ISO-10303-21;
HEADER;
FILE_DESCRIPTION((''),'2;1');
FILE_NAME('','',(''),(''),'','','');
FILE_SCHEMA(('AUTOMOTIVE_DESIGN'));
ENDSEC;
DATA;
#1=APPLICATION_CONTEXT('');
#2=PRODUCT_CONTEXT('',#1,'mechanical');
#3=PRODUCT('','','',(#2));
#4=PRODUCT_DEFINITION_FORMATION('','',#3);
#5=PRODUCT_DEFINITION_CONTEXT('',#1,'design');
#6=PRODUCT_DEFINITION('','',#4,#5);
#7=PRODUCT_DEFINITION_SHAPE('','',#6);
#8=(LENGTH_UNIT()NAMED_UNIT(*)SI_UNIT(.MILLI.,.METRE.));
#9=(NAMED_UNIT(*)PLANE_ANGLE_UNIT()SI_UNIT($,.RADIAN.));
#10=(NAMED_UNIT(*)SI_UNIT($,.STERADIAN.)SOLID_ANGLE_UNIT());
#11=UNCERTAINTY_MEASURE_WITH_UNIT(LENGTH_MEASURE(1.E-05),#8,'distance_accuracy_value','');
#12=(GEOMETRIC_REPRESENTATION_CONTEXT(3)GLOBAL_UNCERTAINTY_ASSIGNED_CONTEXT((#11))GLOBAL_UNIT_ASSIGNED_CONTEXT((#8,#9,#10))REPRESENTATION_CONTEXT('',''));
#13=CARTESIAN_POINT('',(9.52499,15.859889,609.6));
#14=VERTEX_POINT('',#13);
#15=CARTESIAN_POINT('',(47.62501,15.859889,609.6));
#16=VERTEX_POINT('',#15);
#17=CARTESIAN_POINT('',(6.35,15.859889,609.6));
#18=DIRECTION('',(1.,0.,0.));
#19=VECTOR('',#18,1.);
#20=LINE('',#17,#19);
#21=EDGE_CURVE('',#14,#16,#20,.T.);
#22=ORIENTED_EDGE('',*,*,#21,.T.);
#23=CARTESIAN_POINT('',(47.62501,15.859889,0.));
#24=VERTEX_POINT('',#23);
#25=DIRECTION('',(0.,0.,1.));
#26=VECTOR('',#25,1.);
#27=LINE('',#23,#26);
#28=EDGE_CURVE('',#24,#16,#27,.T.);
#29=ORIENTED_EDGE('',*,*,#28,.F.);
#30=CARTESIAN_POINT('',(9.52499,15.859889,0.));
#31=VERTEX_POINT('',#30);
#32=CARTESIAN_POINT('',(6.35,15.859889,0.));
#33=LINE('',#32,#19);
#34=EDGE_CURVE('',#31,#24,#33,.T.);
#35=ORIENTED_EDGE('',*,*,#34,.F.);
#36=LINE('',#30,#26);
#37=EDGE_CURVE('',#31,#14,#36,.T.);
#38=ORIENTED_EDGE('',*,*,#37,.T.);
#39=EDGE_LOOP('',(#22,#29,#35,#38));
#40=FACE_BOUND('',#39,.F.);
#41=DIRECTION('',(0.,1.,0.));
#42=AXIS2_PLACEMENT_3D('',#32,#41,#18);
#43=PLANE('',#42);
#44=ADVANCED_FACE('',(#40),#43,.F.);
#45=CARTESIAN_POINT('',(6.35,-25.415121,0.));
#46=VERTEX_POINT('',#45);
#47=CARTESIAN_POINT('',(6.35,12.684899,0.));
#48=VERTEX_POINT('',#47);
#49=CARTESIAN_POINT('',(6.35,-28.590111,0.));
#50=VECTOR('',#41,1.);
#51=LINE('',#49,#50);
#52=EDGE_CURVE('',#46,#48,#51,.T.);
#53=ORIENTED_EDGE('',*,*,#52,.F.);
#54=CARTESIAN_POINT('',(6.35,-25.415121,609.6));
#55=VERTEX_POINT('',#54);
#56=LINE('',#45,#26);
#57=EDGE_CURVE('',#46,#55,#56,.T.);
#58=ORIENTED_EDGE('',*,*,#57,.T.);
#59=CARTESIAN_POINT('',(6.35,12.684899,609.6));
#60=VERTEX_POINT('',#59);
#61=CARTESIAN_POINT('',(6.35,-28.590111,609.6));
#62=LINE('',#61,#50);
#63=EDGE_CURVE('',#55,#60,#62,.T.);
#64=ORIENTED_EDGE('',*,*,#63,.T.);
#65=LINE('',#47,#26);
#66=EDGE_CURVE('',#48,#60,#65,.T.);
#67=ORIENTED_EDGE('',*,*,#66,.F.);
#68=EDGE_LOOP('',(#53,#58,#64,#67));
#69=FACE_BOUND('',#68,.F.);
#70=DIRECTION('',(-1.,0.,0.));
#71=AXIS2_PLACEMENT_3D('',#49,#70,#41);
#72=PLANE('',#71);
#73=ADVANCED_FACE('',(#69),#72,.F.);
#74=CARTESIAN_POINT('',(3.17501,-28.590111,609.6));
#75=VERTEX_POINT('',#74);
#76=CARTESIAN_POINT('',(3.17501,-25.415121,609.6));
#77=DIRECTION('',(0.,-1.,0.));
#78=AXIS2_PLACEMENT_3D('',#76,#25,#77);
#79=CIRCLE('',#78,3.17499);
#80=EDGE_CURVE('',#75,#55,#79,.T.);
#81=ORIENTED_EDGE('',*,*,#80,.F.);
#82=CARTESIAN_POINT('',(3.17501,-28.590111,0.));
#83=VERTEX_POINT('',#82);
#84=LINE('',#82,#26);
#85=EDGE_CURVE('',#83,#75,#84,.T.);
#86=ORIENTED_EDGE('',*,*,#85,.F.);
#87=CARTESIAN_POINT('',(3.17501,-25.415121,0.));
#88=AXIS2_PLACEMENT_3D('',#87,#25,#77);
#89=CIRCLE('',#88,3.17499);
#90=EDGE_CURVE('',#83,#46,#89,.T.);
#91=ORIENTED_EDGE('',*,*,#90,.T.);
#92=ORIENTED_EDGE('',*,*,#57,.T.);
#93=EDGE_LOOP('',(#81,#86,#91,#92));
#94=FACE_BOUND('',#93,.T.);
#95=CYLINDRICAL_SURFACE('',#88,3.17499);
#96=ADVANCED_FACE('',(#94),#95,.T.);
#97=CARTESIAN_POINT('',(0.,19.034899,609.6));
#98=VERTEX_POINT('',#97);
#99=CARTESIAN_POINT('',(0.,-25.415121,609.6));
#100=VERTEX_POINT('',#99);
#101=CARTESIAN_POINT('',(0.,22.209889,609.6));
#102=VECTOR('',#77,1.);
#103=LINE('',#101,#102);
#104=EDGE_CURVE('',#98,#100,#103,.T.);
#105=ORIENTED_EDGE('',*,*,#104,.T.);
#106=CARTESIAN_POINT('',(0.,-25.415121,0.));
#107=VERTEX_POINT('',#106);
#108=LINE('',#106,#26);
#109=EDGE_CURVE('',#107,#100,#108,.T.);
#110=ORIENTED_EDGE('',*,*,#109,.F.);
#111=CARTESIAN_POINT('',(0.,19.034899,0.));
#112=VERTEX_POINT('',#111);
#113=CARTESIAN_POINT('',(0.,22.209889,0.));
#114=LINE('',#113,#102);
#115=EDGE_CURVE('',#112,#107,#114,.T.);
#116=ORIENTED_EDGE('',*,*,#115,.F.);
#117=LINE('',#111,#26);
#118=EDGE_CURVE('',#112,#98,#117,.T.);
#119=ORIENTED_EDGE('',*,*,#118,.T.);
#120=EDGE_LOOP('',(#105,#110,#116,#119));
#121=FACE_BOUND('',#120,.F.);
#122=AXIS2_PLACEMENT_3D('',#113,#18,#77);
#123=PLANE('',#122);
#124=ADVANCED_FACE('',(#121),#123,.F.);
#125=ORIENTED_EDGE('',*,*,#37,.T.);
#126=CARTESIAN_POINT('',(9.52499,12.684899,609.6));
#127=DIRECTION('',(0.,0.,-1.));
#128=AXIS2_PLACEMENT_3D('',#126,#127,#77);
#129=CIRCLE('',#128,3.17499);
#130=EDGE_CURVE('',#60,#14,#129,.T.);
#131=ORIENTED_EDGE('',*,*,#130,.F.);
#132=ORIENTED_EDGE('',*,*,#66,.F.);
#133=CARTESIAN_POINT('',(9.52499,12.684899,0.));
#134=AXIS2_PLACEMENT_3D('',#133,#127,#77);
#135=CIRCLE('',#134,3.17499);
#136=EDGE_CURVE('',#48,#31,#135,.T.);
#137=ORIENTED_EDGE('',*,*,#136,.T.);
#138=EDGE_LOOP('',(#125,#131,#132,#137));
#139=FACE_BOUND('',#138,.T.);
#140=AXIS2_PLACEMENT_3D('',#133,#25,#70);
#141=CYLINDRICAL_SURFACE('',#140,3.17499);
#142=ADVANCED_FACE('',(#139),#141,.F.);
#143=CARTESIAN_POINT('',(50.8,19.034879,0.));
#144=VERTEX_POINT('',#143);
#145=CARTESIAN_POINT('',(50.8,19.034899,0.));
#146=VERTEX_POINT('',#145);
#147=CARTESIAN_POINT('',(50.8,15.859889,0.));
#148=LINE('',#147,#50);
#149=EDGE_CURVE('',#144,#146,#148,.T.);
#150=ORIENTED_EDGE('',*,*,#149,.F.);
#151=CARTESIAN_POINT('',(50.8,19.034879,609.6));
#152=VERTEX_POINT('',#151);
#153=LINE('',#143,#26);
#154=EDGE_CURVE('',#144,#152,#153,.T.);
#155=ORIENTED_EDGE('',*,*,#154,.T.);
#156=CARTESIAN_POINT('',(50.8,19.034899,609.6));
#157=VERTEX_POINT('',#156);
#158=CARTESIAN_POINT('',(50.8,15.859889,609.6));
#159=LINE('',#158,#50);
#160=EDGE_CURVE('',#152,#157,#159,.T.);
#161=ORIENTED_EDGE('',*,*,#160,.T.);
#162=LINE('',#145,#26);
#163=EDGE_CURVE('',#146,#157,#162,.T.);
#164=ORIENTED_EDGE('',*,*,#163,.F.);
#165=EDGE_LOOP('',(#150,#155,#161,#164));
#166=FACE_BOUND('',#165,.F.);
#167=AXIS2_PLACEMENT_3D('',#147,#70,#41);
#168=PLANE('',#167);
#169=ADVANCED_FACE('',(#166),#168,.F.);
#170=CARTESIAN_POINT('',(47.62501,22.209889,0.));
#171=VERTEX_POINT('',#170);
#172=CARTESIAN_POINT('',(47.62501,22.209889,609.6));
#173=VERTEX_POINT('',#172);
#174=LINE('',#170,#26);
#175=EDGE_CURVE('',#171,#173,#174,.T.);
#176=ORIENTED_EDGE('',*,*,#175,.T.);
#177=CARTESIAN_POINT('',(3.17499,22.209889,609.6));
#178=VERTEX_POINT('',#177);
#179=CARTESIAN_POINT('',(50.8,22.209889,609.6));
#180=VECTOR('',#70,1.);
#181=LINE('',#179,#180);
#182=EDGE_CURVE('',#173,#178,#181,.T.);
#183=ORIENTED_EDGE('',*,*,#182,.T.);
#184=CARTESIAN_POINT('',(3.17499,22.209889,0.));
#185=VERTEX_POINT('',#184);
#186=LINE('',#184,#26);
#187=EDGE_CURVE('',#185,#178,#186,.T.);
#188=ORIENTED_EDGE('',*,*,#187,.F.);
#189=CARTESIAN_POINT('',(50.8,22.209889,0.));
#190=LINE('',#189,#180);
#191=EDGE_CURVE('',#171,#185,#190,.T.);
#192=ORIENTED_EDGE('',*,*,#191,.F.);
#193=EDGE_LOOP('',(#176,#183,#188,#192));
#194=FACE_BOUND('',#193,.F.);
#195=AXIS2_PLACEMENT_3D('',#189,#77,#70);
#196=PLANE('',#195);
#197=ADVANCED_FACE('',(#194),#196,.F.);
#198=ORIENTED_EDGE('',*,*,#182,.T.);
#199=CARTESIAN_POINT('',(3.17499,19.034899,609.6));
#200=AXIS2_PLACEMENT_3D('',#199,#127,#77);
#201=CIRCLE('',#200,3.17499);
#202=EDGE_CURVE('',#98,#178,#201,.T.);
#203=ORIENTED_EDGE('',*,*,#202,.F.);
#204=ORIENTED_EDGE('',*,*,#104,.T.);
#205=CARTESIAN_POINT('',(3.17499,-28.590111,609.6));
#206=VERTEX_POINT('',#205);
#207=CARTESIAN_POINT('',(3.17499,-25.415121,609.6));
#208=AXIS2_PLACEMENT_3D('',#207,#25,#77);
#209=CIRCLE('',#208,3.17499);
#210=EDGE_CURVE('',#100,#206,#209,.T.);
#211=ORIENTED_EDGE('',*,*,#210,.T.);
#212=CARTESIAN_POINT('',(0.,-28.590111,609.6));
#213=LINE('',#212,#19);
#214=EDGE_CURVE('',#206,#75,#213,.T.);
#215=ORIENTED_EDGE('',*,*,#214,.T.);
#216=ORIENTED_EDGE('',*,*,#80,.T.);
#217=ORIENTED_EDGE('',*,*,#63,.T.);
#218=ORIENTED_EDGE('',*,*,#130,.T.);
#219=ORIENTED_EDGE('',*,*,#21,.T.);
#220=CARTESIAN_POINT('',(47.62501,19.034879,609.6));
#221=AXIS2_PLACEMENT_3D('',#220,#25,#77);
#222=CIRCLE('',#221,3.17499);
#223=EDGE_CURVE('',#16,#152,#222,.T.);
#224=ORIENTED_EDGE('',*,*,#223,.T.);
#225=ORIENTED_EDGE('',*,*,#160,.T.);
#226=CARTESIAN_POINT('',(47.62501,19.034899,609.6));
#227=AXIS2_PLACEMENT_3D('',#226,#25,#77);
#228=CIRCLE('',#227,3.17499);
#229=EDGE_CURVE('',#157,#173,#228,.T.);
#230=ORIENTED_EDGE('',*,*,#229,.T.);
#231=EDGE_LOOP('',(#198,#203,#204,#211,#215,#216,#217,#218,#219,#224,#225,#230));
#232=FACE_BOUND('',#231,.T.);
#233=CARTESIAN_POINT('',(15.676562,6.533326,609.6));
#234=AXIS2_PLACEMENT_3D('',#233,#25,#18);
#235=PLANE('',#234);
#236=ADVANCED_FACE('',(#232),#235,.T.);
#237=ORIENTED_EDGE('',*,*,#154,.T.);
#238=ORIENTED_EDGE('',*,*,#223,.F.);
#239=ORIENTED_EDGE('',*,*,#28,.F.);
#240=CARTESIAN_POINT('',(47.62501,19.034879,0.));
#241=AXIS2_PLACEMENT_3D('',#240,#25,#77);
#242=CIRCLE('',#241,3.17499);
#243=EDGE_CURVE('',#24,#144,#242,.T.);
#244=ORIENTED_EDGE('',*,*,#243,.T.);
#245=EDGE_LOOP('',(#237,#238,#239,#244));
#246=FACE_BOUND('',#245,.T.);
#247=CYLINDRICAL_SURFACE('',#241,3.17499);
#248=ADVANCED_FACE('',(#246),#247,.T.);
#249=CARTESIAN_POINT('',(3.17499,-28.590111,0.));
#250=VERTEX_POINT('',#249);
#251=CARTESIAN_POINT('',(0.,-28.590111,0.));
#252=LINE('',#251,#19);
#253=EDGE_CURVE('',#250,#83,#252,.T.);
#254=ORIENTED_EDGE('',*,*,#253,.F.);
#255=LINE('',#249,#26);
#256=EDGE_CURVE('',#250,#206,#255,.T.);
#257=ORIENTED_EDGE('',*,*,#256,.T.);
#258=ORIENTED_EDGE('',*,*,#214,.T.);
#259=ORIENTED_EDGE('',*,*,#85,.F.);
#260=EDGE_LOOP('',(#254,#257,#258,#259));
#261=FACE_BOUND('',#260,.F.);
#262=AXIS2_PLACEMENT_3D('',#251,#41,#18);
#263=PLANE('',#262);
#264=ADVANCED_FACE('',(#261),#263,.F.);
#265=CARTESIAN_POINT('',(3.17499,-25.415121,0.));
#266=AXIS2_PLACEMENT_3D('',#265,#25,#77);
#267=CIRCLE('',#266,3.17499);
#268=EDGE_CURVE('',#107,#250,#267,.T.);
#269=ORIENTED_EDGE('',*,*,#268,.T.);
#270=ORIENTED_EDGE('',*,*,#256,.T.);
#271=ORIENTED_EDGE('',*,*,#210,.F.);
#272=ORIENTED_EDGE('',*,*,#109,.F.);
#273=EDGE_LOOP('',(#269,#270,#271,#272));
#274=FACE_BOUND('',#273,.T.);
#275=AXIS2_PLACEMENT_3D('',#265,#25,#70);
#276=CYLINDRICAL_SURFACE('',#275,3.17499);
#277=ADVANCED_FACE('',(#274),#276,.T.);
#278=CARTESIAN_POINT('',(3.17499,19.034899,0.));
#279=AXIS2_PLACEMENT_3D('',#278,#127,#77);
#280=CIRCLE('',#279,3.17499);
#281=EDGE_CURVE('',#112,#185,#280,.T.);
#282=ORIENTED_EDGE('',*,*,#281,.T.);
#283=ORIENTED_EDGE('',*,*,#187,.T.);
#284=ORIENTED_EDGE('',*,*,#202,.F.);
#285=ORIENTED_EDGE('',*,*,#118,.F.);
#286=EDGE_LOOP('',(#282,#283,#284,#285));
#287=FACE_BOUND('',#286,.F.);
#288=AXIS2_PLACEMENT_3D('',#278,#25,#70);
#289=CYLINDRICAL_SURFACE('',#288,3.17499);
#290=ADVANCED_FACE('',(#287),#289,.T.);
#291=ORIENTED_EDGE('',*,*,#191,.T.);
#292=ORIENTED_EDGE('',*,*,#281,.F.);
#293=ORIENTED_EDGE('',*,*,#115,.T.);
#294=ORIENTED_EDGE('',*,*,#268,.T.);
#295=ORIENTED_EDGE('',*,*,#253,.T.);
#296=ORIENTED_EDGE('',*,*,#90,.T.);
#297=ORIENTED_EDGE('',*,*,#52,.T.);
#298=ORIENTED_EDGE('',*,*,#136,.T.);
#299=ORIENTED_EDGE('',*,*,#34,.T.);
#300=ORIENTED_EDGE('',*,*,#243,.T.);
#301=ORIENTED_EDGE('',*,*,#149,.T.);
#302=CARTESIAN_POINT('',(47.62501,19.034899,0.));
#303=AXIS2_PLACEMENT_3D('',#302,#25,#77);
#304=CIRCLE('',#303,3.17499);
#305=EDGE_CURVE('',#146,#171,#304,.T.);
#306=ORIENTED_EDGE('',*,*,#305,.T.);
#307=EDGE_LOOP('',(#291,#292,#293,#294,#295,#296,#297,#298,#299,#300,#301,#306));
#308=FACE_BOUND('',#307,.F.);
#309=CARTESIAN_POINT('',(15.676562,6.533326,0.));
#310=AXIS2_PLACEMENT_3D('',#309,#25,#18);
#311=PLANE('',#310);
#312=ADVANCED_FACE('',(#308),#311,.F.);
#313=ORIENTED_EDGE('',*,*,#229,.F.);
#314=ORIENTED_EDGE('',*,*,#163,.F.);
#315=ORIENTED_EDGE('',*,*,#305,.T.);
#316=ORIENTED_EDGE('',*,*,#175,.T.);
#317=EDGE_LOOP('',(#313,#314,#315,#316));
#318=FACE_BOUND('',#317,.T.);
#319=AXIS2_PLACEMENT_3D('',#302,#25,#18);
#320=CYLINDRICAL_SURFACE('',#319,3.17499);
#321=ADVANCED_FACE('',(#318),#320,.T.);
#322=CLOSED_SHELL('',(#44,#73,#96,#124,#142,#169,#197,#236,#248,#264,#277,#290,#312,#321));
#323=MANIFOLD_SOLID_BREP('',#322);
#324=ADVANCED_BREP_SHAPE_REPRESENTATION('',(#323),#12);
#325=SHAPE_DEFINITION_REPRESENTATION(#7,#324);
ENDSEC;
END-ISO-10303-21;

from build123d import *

# Parameters (mm, degrees)
F1_DEPTH = 609.6
F2_R     = 3.17499


# Not quite as in the source:
# - a fillet or chamfer is up to 0.001 mm smaller than in the source, because OpenCascade refuses the exact size


with BuildPart() as f1:
    # F0 (on Top) → F1 (new body)
    with BuildSketch(Plane.XY):
        Polygon((0, 22.2098889381), (0, -28.5901110619), (6.35, -28.5901110619), (6.35, 15.8598889381), (50.8, 15.8598889381), (50.8, 22.2098889381), align=None)
    extrude(amount=F1_DEPTH)

    # F2 (radius 3.175 in the source; OpenCascade refuses exactly that, so slightly less here)
    f2_edges = [f1.edges().sort_by_distance(p)[0] for p in [
        (0, -28.590111, 304.8),
        (6.35, -28.590111, 304.8),
        (6.35, 15.859889, 304.8),
        (50.8, 15.859889, 304.8),
        (50.8, 22.209889, 304.8),
        (0, 22.209889, 304.8),
    ]]
    fillet(f2_edges, radius=F2_R)


solid = f1.part
